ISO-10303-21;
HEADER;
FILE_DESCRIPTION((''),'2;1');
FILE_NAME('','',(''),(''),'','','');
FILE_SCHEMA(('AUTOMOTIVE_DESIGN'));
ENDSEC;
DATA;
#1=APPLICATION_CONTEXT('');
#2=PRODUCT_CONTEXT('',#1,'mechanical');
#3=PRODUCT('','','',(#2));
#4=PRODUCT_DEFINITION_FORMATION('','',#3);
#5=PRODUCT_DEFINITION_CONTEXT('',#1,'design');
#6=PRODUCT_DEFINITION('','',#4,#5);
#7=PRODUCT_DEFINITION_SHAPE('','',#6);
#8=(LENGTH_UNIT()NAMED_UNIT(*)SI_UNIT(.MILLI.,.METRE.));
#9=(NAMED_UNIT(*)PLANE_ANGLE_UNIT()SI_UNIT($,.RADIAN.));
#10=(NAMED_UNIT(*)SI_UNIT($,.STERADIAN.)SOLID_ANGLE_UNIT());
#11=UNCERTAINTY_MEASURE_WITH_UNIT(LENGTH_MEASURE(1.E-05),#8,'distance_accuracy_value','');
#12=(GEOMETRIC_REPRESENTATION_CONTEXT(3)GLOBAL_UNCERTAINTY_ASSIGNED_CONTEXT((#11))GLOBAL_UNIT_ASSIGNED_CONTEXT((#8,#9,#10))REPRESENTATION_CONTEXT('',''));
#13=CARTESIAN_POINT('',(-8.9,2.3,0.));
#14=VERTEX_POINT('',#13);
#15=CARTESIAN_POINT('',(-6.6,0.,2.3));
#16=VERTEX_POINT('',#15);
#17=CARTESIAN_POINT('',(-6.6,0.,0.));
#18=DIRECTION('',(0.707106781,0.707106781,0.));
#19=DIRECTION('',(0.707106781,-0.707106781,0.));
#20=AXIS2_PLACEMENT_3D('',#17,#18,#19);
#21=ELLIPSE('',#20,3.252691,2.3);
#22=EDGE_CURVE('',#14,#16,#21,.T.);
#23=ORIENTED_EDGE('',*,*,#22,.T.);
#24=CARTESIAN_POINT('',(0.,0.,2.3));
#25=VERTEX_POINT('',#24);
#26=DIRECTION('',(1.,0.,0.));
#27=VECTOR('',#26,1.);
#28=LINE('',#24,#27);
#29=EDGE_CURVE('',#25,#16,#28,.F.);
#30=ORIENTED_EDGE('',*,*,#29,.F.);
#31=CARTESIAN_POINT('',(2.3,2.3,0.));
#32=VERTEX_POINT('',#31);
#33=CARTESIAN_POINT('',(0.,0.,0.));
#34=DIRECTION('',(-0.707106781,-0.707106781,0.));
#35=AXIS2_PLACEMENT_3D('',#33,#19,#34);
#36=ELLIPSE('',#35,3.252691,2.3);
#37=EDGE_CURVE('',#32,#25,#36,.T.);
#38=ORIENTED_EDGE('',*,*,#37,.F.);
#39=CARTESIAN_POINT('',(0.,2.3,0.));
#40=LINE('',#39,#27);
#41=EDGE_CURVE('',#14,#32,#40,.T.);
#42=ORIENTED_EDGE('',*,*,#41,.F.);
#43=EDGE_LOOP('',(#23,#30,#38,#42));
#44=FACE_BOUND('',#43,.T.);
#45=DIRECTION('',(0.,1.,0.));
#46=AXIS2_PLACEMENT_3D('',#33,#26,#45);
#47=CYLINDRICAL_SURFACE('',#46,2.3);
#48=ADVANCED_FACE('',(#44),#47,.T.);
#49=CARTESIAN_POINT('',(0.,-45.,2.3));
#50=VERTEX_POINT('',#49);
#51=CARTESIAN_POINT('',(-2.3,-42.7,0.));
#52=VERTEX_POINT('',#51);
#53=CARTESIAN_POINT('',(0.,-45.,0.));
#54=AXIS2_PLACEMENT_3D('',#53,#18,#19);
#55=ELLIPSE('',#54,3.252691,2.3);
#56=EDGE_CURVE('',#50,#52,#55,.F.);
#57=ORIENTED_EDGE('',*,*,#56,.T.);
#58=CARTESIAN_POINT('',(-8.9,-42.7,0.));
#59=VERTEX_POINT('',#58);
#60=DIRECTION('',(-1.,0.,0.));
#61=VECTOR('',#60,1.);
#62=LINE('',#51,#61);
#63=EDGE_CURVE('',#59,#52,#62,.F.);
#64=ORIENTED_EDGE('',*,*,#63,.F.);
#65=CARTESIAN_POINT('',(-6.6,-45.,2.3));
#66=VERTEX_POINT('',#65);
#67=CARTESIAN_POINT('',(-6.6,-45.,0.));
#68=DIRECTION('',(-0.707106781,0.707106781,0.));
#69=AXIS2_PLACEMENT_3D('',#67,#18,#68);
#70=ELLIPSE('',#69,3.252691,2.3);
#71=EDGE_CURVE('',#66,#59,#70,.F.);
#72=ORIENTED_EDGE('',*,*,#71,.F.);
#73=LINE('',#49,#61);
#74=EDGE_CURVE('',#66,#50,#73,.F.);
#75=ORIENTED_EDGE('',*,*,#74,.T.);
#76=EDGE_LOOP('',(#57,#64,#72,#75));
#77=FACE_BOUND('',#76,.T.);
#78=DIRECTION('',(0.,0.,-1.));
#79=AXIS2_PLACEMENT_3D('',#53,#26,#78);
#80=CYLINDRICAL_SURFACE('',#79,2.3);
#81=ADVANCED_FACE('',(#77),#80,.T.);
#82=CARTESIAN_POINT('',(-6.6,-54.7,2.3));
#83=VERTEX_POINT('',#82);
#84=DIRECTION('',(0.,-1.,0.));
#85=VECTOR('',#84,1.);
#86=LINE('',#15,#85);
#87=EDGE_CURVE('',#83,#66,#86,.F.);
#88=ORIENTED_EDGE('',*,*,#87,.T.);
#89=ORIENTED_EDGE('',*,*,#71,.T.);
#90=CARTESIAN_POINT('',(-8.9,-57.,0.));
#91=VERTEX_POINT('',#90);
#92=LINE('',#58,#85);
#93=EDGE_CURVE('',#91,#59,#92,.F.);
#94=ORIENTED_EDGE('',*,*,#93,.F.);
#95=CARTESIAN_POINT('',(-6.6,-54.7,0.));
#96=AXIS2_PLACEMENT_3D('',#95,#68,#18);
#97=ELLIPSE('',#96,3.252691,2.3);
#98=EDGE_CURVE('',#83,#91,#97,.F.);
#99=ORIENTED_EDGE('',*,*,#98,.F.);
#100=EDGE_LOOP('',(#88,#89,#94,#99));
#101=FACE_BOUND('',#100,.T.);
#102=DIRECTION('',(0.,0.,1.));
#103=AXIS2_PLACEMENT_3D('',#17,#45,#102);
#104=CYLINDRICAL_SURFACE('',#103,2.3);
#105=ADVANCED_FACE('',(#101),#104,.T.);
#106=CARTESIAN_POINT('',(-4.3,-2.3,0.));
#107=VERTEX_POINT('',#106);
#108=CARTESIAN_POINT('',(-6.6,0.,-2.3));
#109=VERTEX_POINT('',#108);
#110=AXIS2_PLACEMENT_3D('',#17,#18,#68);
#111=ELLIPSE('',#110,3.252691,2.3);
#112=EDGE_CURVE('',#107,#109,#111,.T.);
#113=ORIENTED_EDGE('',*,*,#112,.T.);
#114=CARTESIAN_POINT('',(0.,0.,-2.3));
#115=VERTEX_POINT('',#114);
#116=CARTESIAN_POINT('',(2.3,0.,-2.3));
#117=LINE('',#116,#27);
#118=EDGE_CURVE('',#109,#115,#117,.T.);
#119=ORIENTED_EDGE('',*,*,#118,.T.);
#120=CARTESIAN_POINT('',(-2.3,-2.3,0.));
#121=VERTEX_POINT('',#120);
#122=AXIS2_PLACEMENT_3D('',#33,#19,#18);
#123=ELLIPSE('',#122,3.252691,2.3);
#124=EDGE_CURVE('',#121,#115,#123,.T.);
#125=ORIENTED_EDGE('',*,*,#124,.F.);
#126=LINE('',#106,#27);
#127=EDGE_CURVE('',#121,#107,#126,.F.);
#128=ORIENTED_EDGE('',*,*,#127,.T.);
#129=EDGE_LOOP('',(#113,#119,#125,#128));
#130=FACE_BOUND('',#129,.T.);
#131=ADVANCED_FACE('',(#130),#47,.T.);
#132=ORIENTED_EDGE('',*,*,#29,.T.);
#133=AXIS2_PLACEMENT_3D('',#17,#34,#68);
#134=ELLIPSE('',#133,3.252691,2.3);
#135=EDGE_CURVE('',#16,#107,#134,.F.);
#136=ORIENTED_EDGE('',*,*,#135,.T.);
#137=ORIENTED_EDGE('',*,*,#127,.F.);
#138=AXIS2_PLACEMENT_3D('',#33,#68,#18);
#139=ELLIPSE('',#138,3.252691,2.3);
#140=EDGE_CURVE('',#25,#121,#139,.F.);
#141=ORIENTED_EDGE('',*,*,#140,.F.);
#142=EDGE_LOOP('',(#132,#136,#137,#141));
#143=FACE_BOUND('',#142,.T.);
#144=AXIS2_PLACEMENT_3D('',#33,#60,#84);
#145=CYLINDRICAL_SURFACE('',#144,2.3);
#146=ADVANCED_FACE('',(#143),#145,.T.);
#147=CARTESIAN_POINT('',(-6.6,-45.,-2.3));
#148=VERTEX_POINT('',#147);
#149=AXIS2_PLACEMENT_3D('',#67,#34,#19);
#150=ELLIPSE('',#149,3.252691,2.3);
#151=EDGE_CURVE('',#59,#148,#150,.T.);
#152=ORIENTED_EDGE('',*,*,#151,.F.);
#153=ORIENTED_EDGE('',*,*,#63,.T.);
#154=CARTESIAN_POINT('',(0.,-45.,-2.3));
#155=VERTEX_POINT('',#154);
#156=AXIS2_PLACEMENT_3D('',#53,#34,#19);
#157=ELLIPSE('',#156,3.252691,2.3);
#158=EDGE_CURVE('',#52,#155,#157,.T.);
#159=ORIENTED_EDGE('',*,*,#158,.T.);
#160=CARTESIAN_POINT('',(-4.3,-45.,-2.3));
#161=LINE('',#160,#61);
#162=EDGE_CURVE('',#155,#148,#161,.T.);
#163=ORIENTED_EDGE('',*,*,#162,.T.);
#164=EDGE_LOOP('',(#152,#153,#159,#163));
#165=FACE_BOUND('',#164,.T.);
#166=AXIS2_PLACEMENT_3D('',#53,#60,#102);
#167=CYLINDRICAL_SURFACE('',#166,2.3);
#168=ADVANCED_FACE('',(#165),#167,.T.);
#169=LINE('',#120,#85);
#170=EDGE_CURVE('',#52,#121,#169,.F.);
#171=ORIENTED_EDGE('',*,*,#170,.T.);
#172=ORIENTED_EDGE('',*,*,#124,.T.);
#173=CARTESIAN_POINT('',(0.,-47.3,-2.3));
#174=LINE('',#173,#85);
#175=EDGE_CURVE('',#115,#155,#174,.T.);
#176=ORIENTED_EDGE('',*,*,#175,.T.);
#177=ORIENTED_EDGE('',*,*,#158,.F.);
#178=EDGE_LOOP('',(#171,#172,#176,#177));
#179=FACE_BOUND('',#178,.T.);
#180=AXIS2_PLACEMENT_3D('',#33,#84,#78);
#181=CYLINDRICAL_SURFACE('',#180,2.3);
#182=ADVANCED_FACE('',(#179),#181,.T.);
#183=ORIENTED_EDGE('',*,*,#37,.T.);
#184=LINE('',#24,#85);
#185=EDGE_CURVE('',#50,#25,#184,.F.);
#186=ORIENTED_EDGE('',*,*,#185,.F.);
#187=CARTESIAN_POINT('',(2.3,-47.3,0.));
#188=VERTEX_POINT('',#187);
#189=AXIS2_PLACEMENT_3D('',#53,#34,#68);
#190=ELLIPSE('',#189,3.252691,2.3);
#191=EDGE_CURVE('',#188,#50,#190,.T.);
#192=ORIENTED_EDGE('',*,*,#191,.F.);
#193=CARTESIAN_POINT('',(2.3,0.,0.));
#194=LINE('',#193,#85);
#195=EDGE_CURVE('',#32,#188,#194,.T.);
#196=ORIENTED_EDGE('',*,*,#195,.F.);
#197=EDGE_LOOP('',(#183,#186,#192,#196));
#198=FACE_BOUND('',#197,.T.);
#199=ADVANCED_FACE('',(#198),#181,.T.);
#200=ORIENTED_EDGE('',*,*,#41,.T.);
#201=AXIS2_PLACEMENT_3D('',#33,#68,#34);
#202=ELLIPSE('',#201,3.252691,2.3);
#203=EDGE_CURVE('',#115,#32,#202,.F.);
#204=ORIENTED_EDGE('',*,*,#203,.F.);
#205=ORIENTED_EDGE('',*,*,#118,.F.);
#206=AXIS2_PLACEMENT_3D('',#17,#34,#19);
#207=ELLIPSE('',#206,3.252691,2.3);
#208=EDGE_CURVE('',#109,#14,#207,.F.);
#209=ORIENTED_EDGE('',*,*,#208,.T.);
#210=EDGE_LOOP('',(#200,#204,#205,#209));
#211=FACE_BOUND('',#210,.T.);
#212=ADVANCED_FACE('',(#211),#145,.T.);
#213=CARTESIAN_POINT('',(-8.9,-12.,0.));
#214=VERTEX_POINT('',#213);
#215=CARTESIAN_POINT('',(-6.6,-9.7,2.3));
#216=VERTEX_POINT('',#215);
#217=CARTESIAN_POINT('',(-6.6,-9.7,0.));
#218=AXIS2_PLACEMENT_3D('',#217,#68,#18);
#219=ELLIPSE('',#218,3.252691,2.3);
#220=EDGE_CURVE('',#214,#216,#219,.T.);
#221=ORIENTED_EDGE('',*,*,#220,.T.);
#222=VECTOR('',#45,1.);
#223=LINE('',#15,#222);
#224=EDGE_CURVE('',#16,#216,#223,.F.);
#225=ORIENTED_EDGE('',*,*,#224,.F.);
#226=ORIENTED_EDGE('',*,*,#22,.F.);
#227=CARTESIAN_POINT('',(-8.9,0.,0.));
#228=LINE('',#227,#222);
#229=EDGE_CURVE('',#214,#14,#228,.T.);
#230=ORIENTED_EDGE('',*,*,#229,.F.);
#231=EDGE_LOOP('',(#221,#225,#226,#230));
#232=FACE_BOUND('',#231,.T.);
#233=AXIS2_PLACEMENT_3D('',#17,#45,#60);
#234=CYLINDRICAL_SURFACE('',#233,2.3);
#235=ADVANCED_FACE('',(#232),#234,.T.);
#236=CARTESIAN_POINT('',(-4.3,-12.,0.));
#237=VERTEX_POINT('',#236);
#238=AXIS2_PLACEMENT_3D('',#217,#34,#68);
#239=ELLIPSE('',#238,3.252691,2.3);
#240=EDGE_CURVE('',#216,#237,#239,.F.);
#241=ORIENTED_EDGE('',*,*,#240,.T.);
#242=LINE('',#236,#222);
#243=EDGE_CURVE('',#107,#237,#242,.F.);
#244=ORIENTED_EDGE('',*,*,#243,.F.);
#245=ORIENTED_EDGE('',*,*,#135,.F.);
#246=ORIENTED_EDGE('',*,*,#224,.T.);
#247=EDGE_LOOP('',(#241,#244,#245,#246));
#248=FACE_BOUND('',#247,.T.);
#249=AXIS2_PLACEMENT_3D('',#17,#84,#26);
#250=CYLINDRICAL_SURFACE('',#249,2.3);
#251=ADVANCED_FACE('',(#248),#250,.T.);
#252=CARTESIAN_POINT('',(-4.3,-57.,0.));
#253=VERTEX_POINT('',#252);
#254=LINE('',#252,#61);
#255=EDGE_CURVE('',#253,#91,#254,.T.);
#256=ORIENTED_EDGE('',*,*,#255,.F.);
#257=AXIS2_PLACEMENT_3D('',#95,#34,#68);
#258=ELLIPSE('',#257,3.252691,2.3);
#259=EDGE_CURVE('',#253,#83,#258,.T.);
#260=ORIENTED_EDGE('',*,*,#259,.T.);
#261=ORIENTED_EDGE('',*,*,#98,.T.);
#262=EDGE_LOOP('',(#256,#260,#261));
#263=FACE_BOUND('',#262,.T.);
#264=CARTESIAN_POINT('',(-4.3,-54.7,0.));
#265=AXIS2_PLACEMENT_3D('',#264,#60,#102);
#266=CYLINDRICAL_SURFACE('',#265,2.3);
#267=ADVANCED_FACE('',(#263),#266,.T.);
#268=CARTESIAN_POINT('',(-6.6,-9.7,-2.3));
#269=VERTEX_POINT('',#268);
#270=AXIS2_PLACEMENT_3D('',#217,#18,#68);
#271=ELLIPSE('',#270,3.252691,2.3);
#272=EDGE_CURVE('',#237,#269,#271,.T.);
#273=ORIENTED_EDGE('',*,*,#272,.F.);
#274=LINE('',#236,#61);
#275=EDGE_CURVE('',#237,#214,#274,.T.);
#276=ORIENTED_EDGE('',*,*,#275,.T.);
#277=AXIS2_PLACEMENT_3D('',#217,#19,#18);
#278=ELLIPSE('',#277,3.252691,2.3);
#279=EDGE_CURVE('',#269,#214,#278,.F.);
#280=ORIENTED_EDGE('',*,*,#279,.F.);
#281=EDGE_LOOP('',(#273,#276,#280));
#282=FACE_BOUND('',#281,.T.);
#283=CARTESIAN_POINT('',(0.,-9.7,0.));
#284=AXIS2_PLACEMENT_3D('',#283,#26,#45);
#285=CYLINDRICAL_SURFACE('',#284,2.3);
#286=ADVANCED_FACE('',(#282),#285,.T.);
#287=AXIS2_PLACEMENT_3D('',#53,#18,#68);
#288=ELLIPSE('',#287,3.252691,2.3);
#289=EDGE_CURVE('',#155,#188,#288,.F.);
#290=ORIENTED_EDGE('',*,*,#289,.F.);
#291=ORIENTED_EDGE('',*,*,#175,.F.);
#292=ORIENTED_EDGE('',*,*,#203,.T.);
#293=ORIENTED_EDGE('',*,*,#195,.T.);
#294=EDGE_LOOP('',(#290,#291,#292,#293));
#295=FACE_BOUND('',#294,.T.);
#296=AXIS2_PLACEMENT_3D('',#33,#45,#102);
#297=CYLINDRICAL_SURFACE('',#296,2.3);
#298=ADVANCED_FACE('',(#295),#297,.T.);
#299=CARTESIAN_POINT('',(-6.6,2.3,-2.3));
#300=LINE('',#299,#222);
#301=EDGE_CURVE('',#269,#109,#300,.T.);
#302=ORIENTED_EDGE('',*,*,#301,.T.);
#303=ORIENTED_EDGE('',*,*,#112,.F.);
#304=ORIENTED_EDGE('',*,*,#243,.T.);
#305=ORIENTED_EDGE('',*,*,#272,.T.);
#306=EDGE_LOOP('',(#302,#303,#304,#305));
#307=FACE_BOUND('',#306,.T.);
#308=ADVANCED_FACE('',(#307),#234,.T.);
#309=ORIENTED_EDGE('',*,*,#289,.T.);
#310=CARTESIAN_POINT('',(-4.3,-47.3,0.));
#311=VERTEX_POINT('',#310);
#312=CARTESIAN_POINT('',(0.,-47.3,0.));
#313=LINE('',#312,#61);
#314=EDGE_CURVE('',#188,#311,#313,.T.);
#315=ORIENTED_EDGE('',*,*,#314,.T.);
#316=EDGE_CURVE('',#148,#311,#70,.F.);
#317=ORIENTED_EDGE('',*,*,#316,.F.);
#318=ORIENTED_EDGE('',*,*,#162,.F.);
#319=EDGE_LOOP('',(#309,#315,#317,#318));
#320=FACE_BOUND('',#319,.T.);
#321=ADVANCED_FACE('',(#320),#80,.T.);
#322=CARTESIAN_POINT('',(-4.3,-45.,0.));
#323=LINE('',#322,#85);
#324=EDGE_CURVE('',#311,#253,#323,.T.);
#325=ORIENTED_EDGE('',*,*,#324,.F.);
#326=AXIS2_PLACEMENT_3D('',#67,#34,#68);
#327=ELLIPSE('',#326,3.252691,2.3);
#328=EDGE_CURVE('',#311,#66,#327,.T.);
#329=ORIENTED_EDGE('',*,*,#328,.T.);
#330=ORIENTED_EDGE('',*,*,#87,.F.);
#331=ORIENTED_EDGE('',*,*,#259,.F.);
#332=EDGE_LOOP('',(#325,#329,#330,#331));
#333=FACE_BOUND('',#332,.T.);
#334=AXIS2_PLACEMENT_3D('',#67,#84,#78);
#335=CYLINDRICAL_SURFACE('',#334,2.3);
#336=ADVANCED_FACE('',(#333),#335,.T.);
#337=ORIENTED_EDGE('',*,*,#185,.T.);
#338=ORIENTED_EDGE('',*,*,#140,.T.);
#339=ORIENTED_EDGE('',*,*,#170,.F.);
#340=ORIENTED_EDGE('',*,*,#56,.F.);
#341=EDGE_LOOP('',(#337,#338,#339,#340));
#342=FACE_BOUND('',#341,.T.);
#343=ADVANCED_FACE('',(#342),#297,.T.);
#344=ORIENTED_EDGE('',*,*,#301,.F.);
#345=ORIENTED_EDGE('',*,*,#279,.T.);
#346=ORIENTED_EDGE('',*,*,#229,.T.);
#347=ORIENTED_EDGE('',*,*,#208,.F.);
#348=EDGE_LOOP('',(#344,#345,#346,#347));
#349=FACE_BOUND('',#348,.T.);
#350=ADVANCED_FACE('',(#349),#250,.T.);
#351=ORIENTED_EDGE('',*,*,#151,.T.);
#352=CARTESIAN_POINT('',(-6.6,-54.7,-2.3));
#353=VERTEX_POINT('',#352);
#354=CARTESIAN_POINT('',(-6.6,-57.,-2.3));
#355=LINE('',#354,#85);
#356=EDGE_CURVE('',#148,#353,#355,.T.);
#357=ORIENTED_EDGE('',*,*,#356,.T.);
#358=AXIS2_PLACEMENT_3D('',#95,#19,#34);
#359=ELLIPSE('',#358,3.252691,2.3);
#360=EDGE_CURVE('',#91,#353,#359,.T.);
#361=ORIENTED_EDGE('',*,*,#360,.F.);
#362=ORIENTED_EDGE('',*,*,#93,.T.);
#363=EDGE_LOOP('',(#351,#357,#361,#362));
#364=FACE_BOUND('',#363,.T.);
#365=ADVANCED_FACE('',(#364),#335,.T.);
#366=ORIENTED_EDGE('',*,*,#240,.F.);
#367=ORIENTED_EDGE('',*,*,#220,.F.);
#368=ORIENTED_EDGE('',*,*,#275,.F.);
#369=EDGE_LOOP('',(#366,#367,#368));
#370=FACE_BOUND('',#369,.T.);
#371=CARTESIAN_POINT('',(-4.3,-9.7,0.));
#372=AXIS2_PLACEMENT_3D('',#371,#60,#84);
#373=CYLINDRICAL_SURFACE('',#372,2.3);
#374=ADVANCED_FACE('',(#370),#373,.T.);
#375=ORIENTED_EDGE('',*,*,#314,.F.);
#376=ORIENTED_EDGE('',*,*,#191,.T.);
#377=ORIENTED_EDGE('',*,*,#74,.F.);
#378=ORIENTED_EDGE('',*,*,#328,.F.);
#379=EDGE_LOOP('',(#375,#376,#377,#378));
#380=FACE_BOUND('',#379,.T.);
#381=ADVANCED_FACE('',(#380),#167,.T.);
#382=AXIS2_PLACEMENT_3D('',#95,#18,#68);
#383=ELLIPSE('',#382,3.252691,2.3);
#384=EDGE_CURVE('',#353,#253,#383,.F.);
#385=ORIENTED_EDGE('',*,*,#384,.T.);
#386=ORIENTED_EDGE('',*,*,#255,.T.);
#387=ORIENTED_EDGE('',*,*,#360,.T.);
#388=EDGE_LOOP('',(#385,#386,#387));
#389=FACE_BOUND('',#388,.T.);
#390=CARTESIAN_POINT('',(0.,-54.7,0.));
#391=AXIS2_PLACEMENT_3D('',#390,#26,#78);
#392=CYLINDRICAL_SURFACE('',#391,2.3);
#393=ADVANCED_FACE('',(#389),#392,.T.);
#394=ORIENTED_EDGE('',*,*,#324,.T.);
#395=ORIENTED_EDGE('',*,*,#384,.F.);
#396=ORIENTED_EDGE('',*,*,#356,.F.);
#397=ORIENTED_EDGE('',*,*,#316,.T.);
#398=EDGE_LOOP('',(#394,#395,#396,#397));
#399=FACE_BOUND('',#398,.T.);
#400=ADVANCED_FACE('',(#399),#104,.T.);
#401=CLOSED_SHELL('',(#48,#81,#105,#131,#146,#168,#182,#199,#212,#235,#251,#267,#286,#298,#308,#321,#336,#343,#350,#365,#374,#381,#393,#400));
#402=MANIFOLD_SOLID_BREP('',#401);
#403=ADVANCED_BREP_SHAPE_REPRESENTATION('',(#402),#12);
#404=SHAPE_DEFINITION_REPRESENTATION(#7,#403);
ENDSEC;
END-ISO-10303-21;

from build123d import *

# Parameters (mm, degrees)
EXTRU_MINCE1_DEPTH = 2.3
CONG_1_R           = 2.3


with BuildPart() as part:
    # Esquisse1 → Extru.-Mince1 (new, symmetric)
    with BuildSketch(Plane.XY):
        Polygon((-4.3, -57), (-4.3, -47.3), (2.3, -47.3), (2.3, 2.3), (-8.9, 2.3), (-8.9, -12), (-4.3, -12), (-4.3, -2.3), (-2.3, -2.3), (-2.3, -42.7), (-8.9, -42.7), (-8.9, -57), align=None)
    extrude(amount=EXTRU_MINCE1_DEPTH, both=True)

    # Congé1
    cong_1_edges = [part.edges().sort_by_distance(p)[0] for p in [
        (-6.6, -57, -2.3),
        (-4.3, -52.15, -2.3),
        (-1, -47.3, -2.3),
        (2.3, -22.5, -2.3),
        (-3.3, 2.3, -2.3),
        (-8.9, -4.85, -2.3),
        (-6.6, -12, -2.3),
        (-4.3, -7.15, -2.3),
        (-3.3, -2.3, -2.3),
        (-2.3, -22.5, -2.3),
        (-5.6, -42.7, -2.3),
        (-8.9, -49.85, -2.3),
        (-5.6, -42.7, 2.3),
        (-2.3, -22.5, 2.3),
        (-3.3, -2.3, 2.3),
        (-4.3, -7.15, 2.3),
        (-6.6, -12, 2.3),
        (-8.9, -4.85, 2.3),
        (-3.3, 2.3, 2.3),
        (2.3, -22.5, 2.3),
        (-1, -47.3, 2.3),
        (-4.3, -52.15, 2.3),
        (-6.6, -57, 2.3),
        (-8.9, -49.85, 2.3),
    ]]
    fillet(cong_1_edges, radius=CONG_1_R - 0.0001)  # a hair under: the kernel refuses the full size


solid = part.part
